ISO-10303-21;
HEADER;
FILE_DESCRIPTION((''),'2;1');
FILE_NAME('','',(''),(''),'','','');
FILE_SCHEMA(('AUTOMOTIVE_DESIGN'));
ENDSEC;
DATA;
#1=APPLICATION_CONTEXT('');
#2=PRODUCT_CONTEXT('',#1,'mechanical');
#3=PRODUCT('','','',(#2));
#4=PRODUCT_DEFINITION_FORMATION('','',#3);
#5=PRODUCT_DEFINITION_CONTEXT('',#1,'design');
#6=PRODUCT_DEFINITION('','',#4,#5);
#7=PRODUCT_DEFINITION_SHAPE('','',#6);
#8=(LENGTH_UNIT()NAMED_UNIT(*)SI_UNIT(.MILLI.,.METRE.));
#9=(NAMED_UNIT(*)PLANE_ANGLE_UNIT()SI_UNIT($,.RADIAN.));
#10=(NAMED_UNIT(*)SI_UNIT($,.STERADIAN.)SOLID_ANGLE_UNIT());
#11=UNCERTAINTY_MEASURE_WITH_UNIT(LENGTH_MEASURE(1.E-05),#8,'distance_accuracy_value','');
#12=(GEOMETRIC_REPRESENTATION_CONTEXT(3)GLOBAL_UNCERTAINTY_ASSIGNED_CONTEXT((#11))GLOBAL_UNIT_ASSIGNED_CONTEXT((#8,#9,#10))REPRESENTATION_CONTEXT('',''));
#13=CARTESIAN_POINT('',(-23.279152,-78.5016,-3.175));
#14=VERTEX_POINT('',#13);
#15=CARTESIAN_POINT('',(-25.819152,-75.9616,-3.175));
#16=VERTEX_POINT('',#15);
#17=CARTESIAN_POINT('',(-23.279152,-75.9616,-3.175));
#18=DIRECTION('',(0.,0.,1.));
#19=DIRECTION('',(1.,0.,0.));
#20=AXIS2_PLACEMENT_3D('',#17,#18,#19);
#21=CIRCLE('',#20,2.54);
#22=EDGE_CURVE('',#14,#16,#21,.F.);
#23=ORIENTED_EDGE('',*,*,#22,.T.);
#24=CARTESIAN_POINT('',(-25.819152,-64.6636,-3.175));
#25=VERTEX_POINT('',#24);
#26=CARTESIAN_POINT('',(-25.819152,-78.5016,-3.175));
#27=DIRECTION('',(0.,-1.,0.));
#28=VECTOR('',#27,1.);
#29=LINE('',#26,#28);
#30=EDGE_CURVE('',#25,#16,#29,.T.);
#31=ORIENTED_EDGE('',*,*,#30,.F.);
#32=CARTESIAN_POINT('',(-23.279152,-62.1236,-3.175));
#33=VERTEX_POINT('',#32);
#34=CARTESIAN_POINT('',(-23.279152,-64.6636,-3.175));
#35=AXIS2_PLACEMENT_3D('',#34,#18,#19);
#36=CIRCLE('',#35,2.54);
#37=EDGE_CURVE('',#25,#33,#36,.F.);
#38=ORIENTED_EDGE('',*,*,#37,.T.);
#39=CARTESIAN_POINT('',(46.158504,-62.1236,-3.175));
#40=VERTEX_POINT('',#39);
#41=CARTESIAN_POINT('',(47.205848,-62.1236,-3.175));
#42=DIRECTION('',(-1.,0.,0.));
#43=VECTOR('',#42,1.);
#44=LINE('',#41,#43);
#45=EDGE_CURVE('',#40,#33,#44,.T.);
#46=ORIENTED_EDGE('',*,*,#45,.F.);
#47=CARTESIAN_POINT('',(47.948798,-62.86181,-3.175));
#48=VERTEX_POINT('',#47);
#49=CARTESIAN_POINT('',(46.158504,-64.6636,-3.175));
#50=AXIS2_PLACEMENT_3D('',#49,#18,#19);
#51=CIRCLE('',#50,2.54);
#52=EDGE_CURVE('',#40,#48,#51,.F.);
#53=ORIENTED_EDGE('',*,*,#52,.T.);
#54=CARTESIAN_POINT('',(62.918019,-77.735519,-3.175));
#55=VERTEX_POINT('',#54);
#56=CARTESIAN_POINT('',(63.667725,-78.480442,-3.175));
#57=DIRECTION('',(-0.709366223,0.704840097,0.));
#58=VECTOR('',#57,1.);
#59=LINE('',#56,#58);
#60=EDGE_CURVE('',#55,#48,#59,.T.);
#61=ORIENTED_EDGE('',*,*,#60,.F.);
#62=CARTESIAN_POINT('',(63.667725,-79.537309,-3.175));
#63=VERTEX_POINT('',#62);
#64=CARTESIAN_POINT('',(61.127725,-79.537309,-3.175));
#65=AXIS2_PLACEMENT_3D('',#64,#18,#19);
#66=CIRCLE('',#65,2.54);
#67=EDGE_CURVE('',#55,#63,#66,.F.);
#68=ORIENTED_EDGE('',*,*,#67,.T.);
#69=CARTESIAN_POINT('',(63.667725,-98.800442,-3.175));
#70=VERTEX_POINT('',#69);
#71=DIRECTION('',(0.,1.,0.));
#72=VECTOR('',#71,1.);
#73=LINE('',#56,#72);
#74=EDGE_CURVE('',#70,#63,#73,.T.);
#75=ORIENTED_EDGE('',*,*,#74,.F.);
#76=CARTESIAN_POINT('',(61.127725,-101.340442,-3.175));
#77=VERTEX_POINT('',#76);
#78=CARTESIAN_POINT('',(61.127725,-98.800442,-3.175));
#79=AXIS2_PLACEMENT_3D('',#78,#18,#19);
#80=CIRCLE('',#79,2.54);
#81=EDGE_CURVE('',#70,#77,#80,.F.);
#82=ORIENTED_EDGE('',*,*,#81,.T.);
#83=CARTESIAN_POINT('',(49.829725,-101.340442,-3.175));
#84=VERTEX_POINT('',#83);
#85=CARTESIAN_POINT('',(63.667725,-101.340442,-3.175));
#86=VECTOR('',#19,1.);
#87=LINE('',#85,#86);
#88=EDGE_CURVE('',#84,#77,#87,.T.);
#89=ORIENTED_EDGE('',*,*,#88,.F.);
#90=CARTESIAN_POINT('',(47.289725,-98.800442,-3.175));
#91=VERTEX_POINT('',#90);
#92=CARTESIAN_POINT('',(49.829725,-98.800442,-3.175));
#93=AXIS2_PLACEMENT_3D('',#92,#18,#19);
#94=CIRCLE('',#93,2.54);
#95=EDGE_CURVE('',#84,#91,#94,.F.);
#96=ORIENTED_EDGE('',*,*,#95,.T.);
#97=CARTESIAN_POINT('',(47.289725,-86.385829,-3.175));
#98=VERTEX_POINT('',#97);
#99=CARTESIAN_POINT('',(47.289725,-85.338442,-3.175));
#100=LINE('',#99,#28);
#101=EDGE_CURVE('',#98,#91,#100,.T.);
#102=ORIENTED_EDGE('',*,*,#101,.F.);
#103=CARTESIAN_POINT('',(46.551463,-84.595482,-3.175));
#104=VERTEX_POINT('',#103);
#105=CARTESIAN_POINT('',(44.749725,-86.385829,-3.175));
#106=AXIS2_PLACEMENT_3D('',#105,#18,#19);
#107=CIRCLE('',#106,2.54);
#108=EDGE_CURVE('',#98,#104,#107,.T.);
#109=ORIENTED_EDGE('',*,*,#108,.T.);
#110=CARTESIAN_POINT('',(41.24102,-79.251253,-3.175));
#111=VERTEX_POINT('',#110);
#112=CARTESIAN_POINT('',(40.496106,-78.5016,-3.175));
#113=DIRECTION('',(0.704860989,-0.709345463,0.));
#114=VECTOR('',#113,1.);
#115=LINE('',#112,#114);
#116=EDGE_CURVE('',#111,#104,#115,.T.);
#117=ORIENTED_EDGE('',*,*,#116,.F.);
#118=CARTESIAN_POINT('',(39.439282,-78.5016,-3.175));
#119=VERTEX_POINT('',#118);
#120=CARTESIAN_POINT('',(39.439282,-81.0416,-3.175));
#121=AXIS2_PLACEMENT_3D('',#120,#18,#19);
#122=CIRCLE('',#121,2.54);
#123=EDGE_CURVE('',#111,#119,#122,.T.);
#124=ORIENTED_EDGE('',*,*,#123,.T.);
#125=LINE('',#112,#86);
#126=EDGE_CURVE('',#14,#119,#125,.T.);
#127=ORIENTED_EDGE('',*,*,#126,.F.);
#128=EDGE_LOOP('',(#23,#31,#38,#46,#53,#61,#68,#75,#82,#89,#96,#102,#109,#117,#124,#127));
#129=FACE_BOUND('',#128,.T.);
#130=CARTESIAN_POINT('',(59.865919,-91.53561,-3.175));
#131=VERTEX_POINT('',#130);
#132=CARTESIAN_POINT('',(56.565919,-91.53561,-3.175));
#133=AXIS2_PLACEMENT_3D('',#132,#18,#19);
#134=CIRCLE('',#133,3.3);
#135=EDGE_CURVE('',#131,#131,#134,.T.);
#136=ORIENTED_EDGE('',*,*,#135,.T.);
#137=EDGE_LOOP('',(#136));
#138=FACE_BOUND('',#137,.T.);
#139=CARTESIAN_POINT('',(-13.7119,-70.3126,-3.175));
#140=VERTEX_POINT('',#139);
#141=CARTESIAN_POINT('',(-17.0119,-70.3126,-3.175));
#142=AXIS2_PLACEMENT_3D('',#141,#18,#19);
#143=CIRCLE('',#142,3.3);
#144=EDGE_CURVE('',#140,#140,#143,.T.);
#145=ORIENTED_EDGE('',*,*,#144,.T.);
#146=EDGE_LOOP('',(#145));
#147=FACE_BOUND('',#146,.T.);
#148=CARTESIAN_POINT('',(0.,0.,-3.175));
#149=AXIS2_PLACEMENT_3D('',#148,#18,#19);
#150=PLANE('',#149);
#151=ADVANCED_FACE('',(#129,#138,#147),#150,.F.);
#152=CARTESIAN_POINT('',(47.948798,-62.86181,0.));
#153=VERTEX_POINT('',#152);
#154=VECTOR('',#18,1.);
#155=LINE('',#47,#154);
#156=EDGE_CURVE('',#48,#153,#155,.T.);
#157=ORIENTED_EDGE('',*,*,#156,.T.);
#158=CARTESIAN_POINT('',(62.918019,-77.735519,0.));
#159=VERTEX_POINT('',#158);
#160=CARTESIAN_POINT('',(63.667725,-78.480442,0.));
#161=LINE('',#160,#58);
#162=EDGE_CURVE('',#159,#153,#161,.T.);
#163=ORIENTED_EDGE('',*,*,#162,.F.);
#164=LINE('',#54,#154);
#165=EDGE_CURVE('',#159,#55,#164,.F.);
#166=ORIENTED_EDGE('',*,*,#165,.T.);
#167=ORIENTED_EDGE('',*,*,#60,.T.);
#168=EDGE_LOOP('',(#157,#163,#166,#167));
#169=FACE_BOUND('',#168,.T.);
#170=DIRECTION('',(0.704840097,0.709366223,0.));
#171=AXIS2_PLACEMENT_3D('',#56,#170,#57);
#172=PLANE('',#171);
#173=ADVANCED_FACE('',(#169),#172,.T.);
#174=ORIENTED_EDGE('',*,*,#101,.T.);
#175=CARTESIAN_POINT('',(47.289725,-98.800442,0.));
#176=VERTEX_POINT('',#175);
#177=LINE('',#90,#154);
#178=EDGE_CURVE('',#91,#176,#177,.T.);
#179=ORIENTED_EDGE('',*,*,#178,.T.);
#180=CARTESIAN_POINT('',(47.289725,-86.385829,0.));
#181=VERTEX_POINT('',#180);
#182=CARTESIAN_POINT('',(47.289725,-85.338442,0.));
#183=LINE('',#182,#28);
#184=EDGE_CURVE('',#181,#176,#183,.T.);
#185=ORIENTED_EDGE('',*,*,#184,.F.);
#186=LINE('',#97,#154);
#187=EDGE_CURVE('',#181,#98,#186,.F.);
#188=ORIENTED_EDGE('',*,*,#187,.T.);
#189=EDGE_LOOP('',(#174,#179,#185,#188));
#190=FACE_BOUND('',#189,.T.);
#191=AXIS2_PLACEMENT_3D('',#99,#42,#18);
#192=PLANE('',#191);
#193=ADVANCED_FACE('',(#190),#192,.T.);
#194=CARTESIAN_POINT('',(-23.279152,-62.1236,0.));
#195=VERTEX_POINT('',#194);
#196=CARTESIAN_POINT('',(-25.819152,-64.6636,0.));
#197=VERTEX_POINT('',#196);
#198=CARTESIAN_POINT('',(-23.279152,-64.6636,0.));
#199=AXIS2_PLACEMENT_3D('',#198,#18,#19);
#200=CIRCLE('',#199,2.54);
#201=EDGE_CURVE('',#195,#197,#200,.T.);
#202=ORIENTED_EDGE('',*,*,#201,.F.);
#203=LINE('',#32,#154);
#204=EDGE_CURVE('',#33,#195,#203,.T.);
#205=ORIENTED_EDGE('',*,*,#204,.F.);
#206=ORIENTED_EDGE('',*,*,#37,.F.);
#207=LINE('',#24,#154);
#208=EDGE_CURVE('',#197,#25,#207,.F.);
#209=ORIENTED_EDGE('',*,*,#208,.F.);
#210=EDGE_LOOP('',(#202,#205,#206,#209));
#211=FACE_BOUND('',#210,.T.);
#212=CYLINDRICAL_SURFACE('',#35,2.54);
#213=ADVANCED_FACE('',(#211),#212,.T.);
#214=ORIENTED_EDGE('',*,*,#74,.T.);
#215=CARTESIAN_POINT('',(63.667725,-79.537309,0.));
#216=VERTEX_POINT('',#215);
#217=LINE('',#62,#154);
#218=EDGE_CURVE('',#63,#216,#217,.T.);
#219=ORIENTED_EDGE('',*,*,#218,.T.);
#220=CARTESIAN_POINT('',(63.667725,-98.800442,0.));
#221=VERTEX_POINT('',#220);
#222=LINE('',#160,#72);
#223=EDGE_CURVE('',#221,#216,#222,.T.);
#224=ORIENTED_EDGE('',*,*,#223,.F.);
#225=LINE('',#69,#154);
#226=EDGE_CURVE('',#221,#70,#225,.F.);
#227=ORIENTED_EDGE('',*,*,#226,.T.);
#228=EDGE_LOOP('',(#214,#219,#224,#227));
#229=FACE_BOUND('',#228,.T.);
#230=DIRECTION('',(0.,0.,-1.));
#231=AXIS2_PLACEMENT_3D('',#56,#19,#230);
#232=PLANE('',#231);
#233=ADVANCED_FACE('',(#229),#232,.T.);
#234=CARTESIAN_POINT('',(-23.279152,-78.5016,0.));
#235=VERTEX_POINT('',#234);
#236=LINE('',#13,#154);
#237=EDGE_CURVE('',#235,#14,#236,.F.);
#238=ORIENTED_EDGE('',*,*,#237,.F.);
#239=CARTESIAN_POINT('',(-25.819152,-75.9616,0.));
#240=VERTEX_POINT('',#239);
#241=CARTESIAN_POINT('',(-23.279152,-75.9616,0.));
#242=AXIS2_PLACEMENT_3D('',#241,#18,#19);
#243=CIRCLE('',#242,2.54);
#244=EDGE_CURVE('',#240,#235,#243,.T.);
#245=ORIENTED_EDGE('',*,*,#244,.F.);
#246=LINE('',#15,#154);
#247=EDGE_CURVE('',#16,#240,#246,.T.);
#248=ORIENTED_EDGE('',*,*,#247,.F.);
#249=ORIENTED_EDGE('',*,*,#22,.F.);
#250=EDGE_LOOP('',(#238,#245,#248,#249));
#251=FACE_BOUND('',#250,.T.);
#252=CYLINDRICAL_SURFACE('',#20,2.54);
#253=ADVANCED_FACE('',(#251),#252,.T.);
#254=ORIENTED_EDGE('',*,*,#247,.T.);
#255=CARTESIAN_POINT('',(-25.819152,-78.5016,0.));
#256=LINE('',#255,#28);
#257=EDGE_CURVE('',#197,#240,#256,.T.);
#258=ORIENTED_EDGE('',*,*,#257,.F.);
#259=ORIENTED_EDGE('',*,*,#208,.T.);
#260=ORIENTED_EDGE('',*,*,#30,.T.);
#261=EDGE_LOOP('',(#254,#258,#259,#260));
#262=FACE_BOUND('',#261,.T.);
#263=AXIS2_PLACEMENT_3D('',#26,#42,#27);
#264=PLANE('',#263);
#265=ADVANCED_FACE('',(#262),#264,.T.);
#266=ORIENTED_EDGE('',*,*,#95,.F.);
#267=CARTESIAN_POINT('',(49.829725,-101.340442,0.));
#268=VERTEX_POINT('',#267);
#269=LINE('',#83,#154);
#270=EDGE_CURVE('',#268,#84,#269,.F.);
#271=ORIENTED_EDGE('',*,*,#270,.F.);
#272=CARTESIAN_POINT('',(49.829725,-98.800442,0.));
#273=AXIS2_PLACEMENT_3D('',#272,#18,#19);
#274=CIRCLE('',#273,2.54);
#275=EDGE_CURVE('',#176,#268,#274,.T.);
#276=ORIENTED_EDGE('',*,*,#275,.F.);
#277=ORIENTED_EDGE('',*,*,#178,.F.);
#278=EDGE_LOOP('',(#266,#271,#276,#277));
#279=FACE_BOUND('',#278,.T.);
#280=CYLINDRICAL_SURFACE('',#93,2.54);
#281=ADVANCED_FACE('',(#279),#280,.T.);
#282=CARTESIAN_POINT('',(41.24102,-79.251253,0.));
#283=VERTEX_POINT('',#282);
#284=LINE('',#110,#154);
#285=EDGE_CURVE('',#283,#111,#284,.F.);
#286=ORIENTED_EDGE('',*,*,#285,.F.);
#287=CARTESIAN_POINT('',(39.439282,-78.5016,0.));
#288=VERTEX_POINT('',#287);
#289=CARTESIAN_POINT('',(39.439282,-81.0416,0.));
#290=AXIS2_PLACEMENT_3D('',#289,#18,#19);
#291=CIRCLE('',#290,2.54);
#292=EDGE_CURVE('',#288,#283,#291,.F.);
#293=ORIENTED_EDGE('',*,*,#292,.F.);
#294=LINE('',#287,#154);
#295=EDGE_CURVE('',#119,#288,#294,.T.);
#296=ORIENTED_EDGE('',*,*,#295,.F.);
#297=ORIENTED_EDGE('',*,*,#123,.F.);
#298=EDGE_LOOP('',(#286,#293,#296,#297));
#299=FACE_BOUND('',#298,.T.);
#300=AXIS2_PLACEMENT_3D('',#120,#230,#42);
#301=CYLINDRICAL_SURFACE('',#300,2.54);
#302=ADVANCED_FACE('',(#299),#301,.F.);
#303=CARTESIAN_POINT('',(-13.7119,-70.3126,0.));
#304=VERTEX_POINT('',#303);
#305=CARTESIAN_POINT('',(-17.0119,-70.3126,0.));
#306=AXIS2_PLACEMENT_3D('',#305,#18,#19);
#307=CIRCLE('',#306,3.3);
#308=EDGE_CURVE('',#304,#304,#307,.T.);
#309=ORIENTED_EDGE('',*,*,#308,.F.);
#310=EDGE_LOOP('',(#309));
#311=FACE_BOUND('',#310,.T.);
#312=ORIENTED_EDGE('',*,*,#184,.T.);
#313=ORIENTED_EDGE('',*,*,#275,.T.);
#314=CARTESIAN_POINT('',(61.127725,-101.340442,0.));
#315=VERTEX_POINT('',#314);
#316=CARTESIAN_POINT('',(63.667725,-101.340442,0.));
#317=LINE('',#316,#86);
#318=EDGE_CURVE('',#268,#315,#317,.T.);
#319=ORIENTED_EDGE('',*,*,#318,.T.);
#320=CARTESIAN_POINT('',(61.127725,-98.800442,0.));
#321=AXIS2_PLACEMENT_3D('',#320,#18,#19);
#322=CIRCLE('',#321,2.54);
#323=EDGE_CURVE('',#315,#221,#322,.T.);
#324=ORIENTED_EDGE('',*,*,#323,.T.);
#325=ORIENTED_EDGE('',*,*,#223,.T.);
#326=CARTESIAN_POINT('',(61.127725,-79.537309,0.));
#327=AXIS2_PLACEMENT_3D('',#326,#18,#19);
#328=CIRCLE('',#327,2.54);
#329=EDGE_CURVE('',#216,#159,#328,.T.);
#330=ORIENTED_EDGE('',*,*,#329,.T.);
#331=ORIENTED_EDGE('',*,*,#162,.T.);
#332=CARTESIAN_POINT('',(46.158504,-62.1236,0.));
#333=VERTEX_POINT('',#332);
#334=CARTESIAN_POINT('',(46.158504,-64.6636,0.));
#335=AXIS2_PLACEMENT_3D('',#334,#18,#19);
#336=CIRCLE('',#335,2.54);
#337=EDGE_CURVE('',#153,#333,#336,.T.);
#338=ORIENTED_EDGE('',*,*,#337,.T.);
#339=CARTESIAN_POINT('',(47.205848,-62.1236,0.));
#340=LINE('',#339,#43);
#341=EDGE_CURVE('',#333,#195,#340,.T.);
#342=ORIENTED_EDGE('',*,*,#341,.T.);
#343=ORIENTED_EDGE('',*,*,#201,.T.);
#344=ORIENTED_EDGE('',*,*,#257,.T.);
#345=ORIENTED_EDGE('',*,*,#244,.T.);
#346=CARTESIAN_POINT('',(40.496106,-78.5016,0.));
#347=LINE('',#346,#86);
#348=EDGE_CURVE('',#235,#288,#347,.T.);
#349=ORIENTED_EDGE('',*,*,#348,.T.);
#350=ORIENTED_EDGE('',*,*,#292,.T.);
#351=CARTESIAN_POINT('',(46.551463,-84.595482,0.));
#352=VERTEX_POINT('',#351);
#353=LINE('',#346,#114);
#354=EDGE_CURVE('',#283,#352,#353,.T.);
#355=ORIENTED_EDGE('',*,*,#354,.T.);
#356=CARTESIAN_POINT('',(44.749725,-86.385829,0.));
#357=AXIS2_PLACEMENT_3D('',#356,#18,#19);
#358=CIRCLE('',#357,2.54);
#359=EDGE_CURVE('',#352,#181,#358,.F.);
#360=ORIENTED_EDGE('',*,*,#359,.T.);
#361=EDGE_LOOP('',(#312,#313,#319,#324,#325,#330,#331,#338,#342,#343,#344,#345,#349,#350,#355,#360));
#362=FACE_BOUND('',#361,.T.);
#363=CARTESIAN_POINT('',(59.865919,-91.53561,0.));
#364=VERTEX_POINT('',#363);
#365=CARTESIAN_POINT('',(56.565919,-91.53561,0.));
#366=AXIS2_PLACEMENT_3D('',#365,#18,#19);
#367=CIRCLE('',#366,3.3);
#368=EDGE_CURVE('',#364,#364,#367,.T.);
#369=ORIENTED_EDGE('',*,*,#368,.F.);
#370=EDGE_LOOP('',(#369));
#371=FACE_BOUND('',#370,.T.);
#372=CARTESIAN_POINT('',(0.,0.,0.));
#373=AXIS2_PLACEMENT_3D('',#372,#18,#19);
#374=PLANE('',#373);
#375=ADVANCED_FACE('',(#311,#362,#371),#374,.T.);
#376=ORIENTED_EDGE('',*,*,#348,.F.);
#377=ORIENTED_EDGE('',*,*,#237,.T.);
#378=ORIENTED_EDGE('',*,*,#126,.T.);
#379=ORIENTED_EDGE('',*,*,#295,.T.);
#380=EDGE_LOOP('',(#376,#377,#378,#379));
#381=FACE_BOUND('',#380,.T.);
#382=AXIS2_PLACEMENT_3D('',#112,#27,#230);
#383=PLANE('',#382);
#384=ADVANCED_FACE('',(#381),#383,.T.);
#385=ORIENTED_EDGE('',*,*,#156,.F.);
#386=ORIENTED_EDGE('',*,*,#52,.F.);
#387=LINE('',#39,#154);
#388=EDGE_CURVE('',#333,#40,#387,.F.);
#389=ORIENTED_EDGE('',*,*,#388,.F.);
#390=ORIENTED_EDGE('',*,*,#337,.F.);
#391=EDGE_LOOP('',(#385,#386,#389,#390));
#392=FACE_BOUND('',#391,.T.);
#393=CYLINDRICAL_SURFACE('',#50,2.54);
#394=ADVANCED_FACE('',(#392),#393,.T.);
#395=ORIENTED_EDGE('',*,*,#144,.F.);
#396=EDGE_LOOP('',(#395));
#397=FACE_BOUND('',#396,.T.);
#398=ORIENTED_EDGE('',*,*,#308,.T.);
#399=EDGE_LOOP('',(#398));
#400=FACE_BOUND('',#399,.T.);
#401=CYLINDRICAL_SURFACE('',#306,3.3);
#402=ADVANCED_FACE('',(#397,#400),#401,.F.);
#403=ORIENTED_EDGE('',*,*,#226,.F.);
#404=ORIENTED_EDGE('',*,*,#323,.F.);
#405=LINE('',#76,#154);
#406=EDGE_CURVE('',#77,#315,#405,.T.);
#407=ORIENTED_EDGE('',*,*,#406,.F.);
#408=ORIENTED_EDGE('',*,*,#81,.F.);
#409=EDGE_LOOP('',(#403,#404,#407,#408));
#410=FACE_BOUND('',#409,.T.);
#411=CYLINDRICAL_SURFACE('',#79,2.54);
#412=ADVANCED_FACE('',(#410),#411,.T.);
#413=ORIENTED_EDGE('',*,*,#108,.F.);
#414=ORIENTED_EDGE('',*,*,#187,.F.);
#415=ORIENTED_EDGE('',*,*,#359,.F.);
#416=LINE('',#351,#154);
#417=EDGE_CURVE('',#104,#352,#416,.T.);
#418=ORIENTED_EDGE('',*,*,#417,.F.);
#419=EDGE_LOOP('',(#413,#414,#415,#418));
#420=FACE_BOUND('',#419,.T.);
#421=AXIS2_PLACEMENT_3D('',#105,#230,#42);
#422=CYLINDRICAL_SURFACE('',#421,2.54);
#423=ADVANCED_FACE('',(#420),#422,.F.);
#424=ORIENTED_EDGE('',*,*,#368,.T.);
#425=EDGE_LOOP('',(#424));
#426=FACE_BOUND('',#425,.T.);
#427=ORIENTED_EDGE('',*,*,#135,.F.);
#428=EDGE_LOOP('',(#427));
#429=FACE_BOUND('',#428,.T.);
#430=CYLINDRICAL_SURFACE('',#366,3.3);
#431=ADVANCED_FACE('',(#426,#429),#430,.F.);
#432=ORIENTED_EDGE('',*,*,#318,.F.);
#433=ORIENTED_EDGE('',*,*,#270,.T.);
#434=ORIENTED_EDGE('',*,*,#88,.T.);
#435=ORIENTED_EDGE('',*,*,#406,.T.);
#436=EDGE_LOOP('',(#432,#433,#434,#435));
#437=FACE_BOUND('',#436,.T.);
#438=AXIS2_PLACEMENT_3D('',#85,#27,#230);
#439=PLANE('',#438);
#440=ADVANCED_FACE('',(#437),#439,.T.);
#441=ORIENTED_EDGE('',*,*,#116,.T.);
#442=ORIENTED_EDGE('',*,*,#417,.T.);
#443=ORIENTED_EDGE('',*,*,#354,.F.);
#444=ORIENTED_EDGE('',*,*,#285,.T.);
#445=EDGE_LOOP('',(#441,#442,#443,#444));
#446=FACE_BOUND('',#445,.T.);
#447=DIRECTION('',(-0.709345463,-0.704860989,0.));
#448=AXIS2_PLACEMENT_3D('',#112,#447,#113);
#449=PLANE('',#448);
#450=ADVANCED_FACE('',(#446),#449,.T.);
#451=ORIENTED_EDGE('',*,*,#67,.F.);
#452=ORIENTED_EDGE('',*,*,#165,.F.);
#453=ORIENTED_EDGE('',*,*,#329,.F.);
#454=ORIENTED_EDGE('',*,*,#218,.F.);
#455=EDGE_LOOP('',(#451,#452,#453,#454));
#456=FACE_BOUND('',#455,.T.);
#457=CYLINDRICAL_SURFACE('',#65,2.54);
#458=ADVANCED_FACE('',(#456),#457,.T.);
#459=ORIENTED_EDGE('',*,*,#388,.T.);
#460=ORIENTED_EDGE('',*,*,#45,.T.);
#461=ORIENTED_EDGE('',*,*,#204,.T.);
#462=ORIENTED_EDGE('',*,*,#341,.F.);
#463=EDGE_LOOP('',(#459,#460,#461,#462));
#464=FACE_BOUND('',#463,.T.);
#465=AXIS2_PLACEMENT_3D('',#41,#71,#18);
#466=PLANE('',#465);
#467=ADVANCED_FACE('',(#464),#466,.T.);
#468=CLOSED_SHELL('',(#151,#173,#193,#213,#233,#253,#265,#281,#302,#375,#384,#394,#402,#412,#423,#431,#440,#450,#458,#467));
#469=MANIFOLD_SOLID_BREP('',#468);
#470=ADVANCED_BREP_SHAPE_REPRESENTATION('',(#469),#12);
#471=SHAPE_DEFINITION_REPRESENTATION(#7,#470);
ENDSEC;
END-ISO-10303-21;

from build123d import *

# Parameters (mm, degrees)
BASE_FLANGE1_DEPTH   = 3.175
M6_CLEARANCE_HOLE1_D = 6.6
FILLET1_R            = 2.54


# Sheet-metal steps are written as plain solids
with BuildPart() as part:
    # Sketch1 → Base-Flange1 (new body)
    with BuildSketch(Plane.XY):
        Polygon((63.66772505, -78.480441727), (47.205847983, -62.123600001), (-25.819152017, -62.123600001), (-25.819152017, -78.501600001), (40.496105752, -78.501600001), (47.28972505, -85.338441727), (47.28972505, -101.340441727), (63.66772505, -101.340441727), align=None)
    extrude(amount=-BASE_FLANGE1_DEPTH)

    # M6 Clearance Hole1 (through all)
    with Locations(Plane.XY):
        with Locations((56.565919048, -91.535610498), (-17.0119, -70.312600001)):
            Hole(M6_CLEARANCE_HOLE1_D / 2)

    # Fillet1
    fillet1_edges = [part.edges().sort_by_distance(p)[0] for p in [
        (-25.819152017, -62.123600001, -1.5875),
        (47.205847983, -62.123600001, -1.5875),
        (63.66772505, -78.480441727, -1.5875),
        (63.66772505, -101.340441727, -1.5875),
        (47.28972505, -101.340441727, -1.5875),
        (47.28972505, -85.338441727, -1.5875),
        (40.496105752, -78.501600001, -1.5875),
        (-25.819152017, -78.501600001, -1.5875),
    ]]
    fillet(fillet1_edges, radius=FILLET1_R)


solid = part.part
